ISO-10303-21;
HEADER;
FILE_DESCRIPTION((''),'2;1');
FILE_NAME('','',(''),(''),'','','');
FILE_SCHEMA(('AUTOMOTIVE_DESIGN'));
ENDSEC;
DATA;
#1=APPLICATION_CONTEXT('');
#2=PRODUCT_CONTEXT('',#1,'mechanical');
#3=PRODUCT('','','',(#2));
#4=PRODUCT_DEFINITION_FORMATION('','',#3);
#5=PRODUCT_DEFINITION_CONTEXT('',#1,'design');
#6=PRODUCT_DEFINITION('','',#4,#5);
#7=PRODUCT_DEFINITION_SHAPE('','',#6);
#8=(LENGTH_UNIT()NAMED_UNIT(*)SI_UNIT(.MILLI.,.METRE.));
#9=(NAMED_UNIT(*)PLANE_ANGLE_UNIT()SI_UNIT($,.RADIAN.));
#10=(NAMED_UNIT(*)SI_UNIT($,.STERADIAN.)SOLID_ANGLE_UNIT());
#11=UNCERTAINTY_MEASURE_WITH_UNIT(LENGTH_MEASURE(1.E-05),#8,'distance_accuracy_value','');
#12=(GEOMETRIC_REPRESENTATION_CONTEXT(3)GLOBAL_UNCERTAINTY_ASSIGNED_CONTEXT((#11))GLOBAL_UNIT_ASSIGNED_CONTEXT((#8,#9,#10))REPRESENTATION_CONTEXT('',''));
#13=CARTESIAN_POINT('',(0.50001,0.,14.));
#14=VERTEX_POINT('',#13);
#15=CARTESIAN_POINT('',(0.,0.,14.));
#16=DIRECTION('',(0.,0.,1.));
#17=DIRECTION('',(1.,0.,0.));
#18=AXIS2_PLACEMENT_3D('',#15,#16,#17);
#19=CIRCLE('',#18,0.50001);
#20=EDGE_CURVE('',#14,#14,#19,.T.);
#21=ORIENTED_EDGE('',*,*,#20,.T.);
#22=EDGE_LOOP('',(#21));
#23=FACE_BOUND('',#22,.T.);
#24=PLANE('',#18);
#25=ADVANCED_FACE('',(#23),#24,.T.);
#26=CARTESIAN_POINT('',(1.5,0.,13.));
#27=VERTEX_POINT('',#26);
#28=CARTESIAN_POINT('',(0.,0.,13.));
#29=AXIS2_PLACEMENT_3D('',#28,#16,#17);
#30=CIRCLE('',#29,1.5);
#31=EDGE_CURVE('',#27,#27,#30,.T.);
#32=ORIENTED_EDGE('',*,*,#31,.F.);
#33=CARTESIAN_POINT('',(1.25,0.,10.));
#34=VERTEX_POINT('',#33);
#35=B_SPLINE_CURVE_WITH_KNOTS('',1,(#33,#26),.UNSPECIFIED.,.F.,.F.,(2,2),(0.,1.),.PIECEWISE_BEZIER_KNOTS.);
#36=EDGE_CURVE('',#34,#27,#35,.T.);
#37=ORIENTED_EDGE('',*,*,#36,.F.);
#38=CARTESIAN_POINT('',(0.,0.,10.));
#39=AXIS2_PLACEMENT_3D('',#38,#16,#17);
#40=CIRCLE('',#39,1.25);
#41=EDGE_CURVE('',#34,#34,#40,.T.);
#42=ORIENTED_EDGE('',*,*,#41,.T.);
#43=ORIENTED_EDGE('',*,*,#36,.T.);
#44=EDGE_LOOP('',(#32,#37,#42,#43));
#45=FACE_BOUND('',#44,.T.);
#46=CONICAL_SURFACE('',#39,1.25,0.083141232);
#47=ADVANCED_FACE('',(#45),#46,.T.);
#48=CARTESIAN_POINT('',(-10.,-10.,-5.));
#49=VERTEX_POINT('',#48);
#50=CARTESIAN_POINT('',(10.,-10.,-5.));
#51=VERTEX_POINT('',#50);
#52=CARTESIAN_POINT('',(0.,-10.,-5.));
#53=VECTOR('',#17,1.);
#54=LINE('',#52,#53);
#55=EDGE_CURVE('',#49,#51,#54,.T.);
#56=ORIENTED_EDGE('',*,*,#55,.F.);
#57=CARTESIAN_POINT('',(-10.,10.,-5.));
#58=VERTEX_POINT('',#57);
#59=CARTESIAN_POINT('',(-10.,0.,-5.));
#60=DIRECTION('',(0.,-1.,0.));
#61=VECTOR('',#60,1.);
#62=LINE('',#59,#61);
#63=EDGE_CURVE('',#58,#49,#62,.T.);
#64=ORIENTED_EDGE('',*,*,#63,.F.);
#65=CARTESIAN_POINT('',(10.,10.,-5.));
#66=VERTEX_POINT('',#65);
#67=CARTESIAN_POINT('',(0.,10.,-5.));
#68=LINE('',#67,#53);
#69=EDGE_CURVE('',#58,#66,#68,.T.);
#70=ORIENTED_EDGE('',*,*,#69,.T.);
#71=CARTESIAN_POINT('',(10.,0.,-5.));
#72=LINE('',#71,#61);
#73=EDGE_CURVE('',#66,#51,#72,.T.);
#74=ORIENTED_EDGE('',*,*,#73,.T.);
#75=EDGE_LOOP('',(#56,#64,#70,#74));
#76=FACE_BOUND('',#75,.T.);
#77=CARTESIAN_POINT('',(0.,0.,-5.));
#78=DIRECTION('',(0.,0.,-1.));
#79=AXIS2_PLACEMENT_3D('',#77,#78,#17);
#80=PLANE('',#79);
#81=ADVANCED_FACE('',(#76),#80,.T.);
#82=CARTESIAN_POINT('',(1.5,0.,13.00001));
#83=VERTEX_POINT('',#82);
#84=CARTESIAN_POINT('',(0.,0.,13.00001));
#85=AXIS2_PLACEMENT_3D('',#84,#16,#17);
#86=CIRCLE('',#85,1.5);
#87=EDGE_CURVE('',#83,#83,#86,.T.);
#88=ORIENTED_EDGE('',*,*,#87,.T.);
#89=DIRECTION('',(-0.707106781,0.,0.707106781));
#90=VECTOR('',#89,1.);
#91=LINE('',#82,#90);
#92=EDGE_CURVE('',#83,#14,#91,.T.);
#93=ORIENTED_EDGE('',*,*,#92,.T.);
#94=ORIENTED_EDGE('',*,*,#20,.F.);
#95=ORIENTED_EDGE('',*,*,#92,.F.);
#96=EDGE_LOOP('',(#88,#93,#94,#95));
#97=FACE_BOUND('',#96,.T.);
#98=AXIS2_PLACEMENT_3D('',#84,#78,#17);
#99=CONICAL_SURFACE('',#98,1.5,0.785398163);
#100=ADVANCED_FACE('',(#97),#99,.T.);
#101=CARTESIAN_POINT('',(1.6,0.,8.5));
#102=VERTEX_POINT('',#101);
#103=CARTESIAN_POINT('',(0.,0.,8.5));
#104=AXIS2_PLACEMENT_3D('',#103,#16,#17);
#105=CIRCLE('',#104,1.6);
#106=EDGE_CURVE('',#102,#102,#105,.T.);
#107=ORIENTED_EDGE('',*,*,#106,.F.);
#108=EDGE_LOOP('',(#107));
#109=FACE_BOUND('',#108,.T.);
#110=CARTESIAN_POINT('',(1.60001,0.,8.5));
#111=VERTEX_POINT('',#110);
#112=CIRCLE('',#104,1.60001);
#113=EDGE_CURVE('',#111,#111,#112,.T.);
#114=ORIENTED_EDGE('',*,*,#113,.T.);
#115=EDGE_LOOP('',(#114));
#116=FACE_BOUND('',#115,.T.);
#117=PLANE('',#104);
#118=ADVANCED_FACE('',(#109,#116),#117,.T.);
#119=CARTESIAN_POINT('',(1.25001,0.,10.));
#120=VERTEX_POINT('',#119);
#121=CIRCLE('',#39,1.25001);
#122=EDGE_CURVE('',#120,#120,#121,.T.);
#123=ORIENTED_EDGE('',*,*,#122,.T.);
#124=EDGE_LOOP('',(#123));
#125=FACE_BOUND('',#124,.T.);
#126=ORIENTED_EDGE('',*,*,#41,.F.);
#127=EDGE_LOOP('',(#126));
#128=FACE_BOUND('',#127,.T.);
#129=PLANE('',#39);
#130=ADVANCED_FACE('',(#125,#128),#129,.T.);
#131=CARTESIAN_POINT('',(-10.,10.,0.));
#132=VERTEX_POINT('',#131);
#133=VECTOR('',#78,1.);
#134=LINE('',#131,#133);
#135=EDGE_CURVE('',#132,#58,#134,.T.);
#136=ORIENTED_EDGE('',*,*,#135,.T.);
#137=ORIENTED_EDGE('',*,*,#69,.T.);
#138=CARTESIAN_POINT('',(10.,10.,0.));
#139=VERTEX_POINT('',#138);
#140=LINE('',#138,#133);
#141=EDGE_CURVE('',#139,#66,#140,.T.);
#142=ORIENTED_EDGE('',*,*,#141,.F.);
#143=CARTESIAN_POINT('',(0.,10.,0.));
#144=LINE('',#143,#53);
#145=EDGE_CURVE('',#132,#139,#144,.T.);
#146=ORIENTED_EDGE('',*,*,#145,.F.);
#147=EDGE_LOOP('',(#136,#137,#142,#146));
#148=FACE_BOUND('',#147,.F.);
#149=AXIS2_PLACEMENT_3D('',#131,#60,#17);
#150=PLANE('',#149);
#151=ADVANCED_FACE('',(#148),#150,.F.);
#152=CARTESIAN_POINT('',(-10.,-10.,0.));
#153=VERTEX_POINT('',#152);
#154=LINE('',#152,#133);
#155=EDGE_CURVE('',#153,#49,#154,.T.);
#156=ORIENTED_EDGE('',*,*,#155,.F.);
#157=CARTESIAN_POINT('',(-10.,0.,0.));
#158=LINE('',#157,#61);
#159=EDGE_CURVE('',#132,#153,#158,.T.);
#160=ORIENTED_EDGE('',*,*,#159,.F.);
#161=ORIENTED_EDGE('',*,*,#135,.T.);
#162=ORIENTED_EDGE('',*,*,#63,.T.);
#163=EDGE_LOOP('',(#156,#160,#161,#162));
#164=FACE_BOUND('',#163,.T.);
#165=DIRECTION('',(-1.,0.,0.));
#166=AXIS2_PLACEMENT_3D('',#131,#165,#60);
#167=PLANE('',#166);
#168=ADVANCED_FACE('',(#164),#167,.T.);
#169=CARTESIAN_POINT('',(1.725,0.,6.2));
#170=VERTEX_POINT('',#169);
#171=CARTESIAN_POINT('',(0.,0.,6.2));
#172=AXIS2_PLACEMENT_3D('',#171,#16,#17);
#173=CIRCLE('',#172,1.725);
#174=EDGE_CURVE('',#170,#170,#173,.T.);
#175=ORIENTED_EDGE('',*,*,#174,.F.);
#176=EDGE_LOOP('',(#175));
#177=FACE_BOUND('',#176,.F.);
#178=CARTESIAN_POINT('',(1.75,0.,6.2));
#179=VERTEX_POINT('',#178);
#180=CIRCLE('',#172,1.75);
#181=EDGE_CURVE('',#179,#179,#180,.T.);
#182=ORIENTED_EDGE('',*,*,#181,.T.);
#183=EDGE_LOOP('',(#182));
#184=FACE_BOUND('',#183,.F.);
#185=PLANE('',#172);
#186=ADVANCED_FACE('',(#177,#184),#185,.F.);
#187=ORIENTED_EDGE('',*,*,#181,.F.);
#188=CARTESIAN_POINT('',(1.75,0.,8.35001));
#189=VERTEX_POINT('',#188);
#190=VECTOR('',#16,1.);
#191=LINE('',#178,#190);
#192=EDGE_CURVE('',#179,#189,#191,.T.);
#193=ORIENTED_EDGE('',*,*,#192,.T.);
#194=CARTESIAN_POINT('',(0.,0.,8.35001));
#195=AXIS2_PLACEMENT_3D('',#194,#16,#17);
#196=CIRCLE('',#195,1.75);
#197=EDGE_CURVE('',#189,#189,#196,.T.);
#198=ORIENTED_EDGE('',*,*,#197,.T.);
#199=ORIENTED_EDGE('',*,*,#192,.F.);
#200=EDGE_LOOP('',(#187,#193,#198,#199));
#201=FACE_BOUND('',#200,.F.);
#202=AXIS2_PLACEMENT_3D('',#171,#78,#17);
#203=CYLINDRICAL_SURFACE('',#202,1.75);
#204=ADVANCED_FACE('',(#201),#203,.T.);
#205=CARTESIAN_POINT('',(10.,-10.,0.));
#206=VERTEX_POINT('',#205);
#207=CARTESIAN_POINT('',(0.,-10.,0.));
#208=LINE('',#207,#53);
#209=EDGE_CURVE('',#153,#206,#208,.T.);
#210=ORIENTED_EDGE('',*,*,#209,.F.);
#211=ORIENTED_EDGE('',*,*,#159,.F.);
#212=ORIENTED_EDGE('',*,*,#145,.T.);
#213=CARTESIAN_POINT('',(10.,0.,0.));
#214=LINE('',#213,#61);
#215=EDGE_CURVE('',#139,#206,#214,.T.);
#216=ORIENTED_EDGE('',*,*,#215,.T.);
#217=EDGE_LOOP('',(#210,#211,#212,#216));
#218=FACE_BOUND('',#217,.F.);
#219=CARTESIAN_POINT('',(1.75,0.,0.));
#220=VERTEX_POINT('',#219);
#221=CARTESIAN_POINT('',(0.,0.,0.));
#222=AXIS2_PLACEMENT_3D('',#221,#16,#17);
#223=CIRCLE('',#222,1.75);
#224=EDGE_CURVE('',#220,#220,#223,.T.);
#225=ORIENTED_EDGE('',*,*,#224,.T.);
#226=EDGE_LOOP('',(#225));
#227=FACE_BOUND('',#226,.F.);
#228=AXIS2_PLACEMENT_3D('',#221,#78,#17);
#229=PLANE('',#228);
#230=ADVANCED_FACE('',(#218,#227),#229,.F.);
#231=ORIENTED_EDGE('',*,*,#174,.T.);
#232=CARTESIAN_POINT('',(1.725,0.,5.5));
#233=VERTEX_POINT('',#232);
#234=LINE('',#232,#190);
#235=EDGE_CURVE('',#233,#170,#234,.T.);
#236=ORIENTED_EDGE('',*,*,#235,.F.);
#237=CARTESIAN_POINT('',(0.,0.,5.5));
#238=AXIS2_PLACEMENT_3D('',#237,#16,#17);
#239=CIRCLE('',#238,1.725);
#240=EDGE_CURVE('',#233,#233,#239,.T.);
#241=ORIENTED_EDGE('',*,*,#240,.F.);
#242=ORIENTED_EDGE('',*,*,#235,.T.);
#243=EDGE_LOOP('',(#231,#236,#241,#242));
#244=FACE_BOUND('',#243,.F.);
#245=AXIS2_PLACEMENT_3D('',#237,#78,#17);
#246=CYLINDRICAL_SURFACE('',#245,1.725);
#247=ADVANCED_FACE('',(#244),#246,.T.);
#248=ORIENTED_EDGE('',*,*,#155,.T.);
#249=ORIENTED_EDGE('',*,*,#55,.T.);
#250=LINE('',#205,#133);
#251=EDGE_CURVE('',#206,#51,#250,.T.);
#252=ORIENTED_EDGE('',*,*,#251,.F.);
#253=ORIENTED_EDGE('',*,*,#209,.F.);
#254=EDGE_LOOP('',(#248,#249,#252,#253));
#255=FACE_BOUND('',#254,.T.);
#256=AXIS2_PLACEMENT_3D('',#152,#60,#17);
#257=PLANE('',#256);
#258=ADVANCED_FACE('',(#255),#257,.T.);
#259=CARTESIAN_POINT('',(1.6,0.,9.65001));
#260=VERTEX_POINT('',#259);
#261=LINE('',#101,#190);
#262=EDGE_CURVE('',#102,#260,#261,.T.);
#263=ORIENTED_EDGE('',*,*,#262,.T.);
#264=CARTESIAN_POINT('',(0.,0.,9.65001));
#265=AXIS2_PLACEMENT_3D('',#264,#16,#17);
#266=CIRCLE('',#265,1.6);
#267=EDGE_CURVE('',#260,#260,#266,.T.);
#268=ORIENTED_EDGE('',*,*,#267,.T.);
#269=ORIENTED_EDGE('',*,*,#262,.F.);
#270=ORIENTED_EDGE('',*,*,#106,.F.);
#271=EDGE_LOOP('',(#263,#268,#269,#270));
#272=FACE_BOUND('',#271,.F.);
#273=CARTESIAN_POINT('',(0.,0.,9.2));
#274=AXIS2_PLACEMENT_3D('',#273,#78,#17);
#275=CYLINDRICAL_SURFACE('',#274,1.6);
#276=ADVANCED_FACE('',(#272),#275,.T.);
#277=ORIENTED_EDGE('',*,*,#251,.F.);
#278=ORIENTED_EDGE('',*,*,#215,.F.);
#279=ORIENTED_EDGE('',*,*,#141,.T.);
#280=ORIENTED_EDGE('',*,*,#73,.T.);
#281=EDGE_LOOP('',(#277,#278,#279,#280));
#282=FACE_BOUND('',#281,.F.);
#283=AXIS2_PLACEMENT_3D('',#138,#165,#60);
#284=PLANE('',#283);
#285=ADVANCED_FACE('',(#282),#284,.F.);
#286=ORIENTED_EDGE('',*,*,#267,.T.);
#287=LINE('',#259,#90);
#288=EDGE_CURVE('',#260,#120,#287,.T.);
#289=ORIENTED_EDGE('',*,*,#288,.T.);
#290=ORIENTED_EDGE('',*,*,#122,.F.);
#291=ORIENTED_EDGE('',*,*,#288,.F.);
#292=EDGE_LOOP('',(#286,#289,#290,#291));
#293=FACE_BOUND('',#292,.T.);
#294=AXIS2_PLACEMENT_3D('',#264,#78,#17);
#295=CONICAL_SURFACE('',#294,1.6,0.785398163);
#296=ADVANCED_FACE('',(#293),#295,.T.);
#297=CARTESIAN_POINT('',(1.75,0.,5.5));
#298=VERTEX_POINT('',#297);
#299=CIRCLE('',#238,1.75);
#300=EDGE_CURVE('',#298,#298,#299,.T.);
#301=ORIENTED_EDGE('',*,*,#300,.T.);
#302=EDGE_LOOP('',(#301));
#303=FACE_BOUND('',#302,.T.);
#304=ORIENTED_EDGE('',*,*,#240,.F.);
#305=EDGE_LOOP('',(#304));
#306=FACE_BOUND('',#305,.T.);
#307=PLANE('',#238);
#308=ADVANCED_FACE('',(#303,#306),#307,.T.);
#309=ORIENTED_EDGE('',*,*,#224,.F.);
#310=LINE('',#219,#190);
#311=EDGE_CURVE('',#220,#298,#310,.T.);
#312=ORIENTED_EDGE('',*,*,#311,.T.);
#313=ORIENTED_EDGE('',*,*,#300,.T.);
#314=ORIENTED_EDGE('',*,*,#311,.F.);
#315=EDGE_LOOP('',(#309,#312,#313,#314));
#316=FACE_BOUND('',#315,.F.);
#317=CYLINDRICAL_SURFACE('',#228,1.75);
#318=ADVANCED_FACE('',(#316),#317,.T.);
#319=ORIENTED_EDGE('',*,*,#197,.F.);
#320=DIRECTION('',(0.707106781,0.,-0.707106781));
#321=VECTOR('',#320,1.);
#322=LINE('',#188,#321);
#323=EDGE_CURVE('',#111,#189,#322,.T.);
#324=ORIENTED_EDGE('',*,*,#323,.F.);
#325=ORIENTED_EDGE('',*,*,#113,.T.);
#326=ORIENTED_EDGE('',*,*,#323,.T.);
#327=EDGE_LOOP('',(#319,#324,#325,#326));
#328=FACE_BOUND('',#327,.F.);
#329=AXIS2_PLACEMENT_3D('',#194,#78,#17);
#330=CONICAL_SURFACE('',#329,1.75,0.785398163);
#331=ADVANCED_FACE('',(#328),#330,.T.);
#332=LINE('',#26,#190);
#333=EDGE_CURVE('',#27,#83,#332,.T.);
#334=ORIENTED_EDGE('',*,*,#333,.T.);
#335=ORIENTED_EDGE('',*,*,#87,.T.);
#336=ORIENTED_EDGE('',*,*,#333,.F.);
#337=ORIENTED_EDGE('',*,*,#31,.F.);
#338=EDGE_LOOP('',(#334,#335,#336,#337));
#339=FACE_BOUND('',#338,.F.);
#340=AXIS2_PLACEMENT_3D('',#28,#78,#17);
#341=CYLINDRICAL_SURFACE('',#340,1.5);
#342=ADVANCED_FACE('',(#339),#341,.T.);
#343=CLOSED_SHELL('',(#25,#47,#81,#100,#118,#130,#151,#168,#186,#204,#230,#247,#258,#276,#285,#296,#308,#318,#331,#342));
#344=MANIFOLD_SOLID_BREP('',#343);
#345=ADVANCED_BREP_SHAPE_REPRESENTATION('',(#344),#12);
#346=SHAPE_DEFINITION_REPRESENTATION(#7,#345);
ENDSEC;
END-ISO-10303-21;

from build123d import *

# Parameters (mm, degrees)
F0_R      = 1.75
F1_DEPTH  = 5.5
F3_R      = 1.725
F4_DEPTH  = 0.7
F6_R      = 1.75
F7_DEPTH  = 2.3
F9_R      = 1.6
F10_DEPTH = 0.7
F12_R     = 1.6
F13_DEPTH = 0.8
F15_R     = 1.25
F17_R     = 1.5
F20_R     = 1.5
F21_DEPTH = 1
F22_SIZE2 = 0.99999
F22_SIZE  = 0.99999
F23_SIZE  = 0.14999
F24_SIZE  = 0.34999
F26_W     = 20
F26_H     = 20
F27_DEPTH = 5


# Not quite as in the source:
# - a fillet or chamfer is up to 0.001 mm smaller than in the source, because OpenCascade refuses the exact size


with BuildPart() as f1:
    # F0 (on Top) → F1 (new body)
    with BuildSketch(Plane.XY):
        Circle(F0_R)
    extrude(amount=F1_DEPTH)

    # F3 (on offset) → F4 (join)
    with BuildSketch(Plane.XY.offset(5.5)):
        Circle(F3_R)
    extrude(amount=F4_DEPTH)

    # F6 (on offset) → F7 (join)
    with BuildSketch(Plane.XY.offset(6.2)):
        Circle(F6_R)
    extrude(amount=F7_DEPTH)

    # F9 (on offset) → F10 (join)
    with BuildSketch(Plane.XY.offset(8.5)):
        Circle(F9_R)
    extrude(amount=F10_DEPTH)

    # F12 (on offset) → F13 (join)
    with BuildSketch(Plane.XY.offset(9.2)):
        Circle(F12_R)
    extrude(amount=F13_DEPTH)

    # F15 (on offset) → F18 section 0
    with BuildSketch(Plane.XY.offset(10)):
        Circle(F15_R)
    # F17 (on offset) → F18 section 1
    with BuildSketch(Plane.XY.offset(13)):
        Circle(F17_R)
    loft()

    # F20 (on offset) → F21 (join)
    with BuildSketch(Plane.XY.offset(13)):
        Circle(F20_R)
    extrude(amount=F21_DEPTH)

    # F22 (size 1 and 1 in the source; OpenCascade refuses exactly that, so slightly less here)
    f22_edges = [f1.edges().sort_by_distance(p)[0] for p in [
        (-1.5, 0, 14),
    ]]
    chamfer(f22_edges, length=F22_SIZE, length2=F22_SIZE2)

    # F23 (size 0.15 in the source; OpenCascade refuses exactly that, so slightly less here)
    f23_edges = [f1.edges().sort_by_distance(p)[0] for p in [
        (-1.75, 0, 8.5),
    ]]
    chamfer(f23_edges, length=F23_SIZE)

    # F24 (size 0.35 in the source; OpenCascade refuses exactly that, so slightly less here)
    f24_edges = [f1.edges().sort_by_distance(p)[0] for p in [
        (-1.6, 0, 10),
    ]]
    chamfer(f24_edges, length=F24_SIZE)

    # F26 (on offset) → F27 (join)
    with BuildSketch(Plane(origin=(0, 0, 0), x_dir=(1, 0, 0), z_dir=(0, 0, -1))):
        Rectangle(F26_W, F26_H)
    extrude(amount=F27_DEPTH)


solid = f1.part
